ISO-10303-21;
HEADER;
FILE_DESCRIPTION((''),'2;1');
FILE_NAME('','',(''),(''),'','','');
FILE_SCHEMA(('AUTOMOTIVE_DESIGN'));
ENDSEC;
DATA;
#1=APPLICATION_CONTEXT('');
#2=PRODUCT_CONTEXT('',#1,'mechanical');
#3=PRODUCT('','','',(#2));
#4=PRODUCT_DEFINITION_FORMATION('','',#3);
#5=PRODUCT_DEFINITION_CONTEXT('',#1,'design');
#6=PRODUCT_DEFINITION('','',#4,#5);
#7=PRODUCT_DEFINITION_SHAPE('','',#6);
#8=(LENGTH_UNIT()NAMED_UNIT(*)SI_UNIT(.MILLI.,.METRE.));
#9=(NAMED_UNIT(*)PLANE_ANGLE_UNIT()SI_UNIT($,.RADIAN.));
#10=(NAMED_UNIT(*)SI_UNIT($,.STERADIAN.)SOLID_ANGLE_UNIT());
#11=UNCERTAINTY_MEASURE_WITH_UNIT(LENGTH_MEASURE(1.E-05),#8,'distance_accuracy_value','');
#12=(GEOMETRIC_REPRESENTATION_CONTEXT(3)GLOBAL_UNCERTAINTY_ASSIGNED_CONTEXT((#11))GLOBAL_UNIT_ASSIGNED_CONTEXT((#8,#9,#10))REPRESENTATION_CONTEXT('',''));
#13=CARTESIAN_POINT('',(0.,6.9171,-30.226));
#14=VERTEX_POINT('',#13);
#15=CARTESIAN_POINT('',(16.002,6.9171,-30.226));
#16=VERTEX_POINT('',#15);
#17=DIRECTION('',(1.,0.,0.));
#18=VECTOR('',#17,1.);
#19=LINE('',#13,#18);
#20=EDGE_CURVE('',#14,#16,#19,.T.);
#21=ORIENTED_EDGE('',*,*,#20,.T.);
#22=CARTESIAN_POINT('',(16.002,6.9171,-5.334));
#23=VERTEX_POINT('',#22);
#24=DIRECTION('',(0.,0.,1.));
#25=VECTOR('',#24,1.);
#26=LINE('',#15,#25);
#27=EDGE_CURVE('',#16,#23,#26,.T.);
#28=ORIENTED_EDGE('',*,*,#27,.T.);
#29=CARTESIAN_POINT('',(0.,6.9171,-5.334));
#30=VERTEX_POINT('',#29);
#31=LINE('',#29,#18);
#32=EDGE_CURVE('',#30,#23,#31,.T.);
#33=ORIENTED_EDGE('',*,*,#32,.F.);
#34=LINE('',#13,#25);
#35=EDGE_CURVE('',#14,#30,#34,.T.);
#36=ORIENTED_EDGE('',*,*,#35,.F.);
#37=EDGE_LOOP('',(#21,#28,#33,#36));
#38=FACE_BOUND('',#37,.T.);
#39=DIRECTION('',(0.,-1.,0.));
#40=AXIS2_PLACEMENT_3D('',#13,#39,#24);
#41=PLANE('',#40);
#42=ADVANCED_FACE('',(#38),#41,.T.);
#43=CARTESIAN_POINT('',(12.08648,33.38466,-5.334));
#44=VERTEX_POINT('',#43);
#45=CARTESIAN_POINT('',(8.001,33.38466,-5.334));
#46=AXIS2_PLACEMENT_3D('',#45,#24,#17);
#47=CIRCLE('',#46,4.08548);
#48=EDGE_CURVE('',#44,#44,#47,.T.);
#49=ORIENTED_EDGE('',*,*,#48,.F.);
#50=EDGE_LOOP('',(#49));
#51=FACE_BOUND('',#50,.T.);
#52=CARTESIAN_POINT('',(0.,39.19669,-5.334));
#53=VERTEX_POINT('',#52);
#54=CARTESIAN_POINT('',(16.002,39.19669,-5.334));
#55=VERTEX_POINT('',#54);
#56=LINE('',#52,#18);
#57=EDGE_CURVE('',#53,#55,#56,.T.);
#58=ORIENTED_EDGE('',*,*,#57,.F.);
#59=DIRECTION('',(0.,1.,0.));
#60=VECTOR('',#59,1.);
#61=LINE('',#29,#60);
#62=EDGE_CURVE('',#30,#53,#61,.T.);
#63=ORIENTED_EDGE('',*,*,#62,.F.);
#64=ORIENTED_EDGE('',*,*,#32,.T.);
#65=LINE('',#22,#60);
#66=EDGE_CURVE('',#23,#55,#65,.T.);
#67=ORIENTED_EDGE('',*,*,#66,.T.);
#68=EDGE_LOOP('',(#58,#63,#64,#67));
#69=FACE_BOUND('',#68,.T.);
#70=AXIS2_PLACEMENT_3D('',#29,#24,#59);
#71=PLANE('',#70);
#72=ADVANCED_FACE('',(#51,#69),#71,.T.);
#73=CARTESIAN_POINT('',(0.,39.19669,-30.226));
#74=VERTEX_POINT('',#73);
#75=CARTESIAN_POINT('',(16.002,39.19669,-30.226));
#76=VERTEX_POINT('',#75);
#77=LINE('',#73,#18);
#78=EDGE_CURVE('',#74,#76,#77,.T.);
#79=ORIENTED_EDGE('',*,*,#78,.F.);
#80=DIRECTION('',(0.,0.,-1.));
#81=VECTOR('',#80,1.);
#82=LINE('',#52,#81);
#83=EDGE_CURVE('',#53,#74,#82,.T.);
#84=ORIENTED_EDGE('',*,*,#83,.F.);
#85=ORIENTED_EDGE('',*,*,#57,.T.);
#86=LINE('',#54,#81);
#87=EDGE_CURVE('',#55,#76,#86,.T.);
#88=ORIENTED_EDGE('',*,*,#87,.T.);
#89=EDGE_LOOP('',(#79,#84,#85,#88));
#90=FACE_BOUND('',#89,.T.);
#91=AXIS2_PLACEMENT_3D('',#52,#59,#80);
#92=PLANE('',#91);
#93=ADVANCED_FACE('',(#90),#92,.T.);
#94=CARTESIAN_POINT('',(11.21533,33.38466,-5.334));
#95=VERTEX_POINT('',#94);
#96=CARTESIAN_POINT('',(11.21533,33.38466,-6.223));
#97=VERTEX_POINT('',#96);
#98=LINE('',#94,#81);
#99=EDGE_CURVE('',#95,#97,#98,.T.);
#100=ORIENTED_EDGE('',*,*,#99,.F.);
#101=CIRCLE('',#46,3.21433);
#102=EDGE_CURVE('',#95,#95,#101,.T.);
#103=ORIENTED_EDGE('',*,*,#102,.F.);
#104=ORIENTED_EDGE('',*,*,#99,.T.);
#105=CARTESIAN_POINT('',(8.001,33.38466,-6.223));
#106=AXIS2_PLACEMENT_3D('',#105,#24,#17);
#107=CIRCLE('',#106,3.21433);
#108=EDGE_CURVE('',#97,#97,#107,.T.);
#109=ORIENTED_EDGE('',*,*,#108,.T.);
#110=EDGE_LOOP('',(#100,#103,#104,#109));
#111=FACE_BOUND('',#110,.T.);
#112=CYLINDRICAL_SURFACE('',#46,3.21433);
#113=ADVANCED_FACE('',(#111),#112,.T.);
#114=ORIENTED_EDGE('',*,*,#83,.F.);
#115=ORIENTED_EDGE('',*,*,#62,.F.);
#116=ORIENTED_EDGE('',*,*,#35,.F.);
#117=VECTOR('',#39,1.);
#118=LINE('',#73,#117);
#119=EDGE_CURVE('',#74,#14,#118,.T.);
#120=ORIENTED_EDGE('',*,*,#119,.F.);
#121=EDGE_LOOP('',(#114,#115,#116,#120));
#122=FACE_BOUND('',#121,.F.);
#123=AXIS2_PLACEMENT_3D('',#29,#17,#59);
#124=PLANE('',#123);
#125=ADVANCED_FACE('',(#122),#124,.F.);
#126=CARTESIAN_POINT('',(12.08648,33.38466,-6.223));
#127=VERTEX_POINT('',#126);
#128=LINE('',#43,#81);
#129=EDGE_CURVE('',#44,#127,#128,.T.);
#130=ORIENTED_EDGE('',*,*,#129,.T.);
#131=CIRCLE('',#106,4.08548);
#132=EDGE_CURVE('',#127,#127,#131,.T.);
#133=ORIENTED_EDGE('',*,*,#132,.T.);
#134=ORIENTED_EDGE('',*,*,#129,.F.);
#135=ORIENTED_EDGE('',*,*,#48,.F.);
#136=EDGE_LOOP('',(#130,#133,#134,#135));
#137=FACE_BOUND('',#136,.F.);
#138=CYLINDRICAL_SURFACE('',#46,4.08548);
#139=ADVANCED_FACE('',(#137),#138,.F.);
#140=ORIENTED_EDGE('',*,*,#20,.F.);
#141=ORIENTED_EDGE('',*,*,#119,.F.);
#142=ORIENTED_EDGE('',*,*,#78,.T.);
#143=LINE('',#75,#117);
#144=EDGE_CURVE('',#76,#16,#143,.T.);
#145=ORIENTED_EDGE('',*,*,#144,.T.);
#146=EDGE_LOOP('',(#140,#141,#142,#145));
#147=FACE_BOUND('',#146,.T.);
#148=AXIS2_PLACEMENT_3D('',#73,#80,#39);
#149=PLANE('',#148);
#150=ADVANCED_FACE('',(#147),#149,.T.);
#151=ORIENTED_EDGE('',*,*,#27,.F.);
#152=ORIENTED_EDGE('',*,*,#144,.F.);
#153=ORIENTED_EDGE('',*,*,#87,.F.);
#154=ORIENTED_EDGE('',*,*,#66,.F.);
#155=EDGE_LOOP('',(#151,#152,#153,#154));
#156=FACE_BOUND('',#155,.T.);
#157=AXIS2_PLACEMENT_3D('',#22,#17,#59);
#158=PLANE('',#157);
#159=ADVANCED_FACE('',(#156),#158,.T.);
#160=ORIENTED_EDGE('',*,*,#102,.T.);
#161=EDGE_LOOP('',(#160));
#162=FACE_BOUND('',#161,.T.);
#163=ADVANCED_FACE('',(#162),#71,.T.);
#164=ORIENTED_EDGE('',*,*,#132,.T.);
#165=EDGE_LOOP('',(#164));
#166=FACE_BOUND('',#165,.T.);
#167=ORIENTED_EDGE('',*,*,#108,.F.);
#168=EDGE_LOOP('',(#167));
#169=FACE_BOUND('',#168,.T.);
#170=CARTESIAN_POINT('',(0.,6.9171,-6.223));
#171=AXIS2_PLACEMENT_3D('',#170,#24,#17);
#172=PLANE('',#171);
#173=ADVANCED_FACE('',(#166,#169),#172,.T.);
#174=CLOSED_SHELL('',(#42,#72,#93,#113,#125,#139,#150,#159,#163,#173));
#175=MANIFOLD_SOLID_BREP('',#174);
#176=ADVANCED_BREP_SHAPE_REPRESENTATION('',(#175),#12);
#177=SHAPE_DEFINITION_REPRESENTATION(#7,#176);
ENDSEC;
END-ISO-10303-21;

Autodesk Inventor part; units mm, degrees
ref_plane "YZ Plane" through (0, 0, 0) normal (1, 0, 0) x (0, 1, 0)
ref_plane "XZ Plane" through (0, 0, 0) normal (0, 1, 0) x (-1, 0, 0)
ref_plane "XY Plane" through (0, 0, 0) normal (0, 0, 1) x (1, 0, 0)
sketch "Sketch1" plane through (0, 0, 0) normal (1, 0, 0) x (0, 1, 0)
  line L0 (0, 0) -> (46.1137, 0)
  line L1 (46.1137, 0) -> (46.1137, -35.56)
  line L2 (46.1137, -35.56) -> (0, -35.56)
  line L3 (0, -35.56) -> (0, 0)
  dimension "d0" = 46.1137
  dimension "d1" = 35.56
extrude "Extrusion1" add sketch "Sketch1" along normal blind 22.86
sketch "Sketch2" plane through (0, 0, 0) normal (0, 0, 1) x (1, 0, 0)
  circle A0 centre (11.43, 37.8108) radius 5.8364
  circle A1 centre (11.43, 37.8108) radius 4.5919
  point P0 (0, 0)
extrude "Extrusion2" cut sketch "Sketch2" against normal blind 1.27
scale "Scale1" factors (0.7, 0.7, 0.7) then translate (0, 6.9171, -5.334) bodies 1
properties part number "aqisensor"
